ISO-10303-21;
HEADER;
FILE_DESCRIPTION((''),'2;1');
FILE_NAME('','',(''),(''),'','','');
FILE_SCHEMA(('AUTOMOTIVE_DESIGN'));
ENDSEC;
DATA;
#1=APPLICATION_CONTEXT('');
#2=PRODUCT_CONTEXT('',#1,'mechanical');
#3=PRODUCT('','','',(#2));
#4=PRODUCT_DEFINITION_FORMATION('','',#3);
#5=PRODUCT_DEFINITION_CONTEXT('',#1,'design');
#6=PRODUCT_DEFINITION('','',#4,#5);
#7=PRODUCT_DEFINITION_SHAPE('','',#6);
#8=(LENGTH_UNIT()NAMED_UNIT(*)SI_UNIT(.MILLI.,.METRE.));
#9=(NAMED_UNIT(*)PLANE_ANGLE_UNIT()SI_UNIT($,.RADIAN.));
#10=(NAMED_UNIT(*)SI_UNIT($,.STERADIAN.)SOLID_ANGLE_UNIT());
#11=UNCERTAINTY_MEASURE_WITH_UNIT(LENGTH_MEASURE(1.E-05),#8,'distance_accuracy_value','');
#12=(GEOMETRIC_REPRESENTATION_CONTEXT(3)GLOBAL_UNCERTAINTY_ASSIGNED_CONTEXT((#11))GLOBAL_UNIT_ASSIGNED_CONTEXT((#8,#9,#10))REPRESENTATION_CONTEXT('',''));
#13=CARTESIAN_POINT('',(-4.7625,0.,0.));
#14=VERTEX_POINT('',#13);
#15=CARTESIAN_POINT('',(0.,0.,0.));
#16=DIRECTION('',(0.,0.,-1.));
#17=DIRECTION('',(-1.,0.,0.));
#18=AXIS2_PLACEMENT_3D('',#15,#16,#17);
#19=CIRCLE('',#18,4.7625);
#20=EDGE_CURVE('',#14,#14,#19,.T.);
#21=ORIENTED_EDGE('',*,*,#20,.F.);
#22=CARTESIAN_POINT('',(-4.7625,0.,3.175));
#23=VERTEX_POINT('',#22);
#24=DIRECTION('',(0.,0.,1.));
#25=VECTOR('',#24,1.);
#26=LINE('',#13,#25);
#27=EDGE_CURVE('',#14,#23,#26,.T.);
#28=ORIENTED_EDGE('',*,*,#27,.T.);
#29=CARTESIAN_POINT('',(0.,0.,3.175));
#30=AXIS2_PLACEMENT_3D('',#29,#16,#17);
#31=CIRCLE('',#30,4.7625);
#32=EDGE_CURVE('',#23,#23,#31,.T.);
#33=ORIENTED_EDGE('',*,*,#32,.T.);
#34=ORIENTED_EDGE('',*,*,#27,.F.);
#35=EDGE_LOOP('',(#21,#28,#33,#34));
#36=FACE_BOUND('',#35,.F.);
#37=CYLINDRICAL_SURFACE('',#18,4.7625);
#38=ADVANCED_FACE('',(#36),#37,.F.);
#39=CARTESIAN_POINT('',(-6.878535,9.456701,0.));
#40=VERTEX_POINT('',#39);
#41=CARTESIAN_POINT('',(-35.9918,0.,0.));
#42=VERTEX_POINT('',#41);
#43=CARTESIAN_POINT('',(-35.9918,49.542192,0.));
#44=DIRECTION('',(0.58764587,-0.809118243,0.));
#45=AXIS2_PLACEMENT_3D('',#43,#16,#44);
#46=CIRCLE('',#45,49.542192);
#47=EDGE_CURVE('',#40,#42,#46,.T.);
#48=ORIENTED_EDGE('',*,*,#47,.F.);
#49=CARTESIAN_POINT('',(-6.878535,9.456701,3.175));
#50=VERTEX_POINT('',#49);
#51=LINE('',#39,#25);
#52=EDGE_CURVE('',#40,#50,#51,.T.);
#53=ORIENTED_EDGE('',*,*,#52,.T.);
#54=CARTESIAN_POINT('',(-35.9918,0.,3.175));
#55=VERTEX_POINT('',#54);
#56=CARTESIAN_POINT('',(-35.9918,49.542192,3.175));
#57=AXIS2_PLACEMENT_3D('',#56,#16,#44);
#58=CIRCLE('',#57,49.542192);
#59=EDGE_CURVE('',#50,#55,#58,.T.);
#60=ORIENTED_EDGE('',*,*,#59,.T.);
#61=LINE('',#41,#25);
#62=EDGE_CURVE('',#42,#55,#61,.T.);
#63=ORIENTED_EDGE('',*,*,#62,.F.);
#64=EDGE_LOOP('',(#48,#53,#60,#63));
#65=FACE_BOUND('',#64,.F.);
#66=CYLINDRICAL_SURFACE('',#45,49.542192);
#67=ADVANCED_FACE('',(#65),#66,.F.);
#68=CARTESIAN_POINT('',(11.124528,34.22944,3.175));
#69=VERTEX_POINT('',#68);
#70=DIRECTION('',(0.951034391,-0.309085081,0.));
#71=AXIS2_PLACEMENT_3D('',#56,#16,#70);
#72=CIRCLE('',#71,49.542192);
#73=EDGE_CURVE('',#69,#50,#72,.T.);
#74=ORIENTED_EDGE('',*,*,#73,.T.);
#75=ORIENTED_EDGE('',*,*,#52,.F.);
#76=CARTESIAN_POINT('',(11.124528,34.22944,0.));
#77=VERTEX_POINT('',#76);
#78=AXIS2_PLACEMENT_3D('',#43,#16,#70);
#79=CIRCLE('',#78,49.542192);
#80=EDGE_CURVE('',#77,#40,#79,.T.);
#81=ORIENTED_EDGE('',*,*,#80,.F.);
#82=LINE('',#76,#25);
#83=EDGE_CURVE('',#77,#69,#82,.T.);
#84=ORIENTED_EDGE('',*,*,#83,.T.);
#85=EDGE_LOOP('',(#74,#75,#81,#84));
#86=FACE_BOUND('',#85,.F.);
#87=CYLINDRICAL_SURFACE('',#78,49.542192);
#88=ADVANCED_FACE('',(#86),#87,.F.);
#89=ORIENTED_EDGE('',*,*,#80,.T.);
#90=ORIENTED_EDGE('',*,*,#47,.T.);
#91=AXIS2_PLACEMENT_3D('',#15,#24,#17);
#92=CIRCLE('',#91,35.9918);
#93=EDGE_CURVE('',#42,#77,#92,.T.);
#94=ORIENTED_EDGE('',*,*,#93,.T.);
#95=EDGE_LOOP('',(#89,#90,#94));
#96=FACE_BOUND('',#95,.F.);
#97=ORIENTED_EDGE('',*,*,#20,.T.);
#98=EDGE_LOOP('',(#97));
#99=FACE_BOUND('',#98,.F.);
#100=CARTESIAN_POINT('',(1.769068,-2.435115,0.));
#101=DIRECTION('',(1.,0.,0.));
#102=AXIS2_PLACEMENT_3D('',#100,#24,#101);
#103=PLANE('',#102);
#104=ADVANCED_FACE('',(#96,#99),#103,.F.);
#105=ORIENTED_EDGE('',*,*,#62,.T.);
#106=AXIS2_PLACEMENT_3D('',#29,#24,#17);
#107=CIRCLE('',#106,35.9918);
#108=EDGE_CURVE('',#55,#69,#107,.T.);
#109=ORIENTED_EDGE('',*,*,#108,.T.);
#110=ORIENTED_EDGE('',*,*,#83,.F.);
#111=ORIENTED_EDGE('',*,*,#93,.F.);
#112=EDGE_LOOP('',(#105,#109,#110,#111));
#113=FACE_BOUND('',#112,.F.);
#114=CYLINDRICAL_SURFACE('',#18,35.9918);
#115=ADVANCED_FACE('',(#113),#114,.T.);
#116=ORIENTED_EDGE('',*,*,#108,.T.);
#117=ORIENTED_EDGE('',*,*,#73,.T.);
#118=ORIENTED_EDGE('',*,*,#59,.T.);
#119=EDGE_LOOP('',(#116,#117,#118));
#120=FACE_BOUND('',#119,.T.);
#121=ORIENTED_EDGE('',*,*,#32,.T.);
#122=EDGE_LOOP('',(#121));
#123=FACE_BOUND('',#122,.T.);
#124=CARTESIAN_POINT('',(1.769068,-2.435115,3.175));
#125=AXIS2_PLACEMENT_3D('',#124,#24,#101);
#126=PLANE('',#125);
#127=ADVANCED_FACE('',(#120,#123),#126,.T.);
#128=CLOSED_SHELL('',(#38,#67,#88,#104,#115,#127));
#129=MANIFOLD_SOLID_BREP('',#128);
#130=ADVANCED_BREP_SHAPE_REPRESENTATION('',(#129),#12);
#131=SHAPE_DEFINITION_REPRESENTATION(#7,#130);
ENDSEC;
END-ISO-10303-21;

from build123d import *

# Parameters (mm, degrees)
F1_DEPTH = 3.175


# Not quite as in the source:
# - a length typed as a fraction of an inch, garbled in the dataset ("3 / 203.2 mm" for 3/8 in), is restored


with BuildPart() as f1:
    # F0 (on Top) → F1 (new body)
    with BuildSketch(Plane.XY):
        with BuildLine():
            ThreePointArc((-6.8785354807, 9.4567006447), (-20.6864793724, 2.4234489284), (-35.9918, 0))
            ThreePointArc((-35.9918, 0), (21.1544069396, -29.1187351077), (11.1245284011, 34.2294395966))
            ThreePointArc((11.1245284011, 34.2294395966), (4.0851242581, 20.4171352589), (-6.8785354807, 9.4567006447))
        make_face()
        with BuildLine():
            ThreePointArc((4.7625, 0), (0, -4.7625), (-4.7625, 0))
            ThreePointArc((-4.7625, 0), (0, 4.7625), (4.7625, 0))
        make_face(mode=Mode.SUBTRACT)
    extrude(amount=F1_DEPTH)


solid = f1.part
